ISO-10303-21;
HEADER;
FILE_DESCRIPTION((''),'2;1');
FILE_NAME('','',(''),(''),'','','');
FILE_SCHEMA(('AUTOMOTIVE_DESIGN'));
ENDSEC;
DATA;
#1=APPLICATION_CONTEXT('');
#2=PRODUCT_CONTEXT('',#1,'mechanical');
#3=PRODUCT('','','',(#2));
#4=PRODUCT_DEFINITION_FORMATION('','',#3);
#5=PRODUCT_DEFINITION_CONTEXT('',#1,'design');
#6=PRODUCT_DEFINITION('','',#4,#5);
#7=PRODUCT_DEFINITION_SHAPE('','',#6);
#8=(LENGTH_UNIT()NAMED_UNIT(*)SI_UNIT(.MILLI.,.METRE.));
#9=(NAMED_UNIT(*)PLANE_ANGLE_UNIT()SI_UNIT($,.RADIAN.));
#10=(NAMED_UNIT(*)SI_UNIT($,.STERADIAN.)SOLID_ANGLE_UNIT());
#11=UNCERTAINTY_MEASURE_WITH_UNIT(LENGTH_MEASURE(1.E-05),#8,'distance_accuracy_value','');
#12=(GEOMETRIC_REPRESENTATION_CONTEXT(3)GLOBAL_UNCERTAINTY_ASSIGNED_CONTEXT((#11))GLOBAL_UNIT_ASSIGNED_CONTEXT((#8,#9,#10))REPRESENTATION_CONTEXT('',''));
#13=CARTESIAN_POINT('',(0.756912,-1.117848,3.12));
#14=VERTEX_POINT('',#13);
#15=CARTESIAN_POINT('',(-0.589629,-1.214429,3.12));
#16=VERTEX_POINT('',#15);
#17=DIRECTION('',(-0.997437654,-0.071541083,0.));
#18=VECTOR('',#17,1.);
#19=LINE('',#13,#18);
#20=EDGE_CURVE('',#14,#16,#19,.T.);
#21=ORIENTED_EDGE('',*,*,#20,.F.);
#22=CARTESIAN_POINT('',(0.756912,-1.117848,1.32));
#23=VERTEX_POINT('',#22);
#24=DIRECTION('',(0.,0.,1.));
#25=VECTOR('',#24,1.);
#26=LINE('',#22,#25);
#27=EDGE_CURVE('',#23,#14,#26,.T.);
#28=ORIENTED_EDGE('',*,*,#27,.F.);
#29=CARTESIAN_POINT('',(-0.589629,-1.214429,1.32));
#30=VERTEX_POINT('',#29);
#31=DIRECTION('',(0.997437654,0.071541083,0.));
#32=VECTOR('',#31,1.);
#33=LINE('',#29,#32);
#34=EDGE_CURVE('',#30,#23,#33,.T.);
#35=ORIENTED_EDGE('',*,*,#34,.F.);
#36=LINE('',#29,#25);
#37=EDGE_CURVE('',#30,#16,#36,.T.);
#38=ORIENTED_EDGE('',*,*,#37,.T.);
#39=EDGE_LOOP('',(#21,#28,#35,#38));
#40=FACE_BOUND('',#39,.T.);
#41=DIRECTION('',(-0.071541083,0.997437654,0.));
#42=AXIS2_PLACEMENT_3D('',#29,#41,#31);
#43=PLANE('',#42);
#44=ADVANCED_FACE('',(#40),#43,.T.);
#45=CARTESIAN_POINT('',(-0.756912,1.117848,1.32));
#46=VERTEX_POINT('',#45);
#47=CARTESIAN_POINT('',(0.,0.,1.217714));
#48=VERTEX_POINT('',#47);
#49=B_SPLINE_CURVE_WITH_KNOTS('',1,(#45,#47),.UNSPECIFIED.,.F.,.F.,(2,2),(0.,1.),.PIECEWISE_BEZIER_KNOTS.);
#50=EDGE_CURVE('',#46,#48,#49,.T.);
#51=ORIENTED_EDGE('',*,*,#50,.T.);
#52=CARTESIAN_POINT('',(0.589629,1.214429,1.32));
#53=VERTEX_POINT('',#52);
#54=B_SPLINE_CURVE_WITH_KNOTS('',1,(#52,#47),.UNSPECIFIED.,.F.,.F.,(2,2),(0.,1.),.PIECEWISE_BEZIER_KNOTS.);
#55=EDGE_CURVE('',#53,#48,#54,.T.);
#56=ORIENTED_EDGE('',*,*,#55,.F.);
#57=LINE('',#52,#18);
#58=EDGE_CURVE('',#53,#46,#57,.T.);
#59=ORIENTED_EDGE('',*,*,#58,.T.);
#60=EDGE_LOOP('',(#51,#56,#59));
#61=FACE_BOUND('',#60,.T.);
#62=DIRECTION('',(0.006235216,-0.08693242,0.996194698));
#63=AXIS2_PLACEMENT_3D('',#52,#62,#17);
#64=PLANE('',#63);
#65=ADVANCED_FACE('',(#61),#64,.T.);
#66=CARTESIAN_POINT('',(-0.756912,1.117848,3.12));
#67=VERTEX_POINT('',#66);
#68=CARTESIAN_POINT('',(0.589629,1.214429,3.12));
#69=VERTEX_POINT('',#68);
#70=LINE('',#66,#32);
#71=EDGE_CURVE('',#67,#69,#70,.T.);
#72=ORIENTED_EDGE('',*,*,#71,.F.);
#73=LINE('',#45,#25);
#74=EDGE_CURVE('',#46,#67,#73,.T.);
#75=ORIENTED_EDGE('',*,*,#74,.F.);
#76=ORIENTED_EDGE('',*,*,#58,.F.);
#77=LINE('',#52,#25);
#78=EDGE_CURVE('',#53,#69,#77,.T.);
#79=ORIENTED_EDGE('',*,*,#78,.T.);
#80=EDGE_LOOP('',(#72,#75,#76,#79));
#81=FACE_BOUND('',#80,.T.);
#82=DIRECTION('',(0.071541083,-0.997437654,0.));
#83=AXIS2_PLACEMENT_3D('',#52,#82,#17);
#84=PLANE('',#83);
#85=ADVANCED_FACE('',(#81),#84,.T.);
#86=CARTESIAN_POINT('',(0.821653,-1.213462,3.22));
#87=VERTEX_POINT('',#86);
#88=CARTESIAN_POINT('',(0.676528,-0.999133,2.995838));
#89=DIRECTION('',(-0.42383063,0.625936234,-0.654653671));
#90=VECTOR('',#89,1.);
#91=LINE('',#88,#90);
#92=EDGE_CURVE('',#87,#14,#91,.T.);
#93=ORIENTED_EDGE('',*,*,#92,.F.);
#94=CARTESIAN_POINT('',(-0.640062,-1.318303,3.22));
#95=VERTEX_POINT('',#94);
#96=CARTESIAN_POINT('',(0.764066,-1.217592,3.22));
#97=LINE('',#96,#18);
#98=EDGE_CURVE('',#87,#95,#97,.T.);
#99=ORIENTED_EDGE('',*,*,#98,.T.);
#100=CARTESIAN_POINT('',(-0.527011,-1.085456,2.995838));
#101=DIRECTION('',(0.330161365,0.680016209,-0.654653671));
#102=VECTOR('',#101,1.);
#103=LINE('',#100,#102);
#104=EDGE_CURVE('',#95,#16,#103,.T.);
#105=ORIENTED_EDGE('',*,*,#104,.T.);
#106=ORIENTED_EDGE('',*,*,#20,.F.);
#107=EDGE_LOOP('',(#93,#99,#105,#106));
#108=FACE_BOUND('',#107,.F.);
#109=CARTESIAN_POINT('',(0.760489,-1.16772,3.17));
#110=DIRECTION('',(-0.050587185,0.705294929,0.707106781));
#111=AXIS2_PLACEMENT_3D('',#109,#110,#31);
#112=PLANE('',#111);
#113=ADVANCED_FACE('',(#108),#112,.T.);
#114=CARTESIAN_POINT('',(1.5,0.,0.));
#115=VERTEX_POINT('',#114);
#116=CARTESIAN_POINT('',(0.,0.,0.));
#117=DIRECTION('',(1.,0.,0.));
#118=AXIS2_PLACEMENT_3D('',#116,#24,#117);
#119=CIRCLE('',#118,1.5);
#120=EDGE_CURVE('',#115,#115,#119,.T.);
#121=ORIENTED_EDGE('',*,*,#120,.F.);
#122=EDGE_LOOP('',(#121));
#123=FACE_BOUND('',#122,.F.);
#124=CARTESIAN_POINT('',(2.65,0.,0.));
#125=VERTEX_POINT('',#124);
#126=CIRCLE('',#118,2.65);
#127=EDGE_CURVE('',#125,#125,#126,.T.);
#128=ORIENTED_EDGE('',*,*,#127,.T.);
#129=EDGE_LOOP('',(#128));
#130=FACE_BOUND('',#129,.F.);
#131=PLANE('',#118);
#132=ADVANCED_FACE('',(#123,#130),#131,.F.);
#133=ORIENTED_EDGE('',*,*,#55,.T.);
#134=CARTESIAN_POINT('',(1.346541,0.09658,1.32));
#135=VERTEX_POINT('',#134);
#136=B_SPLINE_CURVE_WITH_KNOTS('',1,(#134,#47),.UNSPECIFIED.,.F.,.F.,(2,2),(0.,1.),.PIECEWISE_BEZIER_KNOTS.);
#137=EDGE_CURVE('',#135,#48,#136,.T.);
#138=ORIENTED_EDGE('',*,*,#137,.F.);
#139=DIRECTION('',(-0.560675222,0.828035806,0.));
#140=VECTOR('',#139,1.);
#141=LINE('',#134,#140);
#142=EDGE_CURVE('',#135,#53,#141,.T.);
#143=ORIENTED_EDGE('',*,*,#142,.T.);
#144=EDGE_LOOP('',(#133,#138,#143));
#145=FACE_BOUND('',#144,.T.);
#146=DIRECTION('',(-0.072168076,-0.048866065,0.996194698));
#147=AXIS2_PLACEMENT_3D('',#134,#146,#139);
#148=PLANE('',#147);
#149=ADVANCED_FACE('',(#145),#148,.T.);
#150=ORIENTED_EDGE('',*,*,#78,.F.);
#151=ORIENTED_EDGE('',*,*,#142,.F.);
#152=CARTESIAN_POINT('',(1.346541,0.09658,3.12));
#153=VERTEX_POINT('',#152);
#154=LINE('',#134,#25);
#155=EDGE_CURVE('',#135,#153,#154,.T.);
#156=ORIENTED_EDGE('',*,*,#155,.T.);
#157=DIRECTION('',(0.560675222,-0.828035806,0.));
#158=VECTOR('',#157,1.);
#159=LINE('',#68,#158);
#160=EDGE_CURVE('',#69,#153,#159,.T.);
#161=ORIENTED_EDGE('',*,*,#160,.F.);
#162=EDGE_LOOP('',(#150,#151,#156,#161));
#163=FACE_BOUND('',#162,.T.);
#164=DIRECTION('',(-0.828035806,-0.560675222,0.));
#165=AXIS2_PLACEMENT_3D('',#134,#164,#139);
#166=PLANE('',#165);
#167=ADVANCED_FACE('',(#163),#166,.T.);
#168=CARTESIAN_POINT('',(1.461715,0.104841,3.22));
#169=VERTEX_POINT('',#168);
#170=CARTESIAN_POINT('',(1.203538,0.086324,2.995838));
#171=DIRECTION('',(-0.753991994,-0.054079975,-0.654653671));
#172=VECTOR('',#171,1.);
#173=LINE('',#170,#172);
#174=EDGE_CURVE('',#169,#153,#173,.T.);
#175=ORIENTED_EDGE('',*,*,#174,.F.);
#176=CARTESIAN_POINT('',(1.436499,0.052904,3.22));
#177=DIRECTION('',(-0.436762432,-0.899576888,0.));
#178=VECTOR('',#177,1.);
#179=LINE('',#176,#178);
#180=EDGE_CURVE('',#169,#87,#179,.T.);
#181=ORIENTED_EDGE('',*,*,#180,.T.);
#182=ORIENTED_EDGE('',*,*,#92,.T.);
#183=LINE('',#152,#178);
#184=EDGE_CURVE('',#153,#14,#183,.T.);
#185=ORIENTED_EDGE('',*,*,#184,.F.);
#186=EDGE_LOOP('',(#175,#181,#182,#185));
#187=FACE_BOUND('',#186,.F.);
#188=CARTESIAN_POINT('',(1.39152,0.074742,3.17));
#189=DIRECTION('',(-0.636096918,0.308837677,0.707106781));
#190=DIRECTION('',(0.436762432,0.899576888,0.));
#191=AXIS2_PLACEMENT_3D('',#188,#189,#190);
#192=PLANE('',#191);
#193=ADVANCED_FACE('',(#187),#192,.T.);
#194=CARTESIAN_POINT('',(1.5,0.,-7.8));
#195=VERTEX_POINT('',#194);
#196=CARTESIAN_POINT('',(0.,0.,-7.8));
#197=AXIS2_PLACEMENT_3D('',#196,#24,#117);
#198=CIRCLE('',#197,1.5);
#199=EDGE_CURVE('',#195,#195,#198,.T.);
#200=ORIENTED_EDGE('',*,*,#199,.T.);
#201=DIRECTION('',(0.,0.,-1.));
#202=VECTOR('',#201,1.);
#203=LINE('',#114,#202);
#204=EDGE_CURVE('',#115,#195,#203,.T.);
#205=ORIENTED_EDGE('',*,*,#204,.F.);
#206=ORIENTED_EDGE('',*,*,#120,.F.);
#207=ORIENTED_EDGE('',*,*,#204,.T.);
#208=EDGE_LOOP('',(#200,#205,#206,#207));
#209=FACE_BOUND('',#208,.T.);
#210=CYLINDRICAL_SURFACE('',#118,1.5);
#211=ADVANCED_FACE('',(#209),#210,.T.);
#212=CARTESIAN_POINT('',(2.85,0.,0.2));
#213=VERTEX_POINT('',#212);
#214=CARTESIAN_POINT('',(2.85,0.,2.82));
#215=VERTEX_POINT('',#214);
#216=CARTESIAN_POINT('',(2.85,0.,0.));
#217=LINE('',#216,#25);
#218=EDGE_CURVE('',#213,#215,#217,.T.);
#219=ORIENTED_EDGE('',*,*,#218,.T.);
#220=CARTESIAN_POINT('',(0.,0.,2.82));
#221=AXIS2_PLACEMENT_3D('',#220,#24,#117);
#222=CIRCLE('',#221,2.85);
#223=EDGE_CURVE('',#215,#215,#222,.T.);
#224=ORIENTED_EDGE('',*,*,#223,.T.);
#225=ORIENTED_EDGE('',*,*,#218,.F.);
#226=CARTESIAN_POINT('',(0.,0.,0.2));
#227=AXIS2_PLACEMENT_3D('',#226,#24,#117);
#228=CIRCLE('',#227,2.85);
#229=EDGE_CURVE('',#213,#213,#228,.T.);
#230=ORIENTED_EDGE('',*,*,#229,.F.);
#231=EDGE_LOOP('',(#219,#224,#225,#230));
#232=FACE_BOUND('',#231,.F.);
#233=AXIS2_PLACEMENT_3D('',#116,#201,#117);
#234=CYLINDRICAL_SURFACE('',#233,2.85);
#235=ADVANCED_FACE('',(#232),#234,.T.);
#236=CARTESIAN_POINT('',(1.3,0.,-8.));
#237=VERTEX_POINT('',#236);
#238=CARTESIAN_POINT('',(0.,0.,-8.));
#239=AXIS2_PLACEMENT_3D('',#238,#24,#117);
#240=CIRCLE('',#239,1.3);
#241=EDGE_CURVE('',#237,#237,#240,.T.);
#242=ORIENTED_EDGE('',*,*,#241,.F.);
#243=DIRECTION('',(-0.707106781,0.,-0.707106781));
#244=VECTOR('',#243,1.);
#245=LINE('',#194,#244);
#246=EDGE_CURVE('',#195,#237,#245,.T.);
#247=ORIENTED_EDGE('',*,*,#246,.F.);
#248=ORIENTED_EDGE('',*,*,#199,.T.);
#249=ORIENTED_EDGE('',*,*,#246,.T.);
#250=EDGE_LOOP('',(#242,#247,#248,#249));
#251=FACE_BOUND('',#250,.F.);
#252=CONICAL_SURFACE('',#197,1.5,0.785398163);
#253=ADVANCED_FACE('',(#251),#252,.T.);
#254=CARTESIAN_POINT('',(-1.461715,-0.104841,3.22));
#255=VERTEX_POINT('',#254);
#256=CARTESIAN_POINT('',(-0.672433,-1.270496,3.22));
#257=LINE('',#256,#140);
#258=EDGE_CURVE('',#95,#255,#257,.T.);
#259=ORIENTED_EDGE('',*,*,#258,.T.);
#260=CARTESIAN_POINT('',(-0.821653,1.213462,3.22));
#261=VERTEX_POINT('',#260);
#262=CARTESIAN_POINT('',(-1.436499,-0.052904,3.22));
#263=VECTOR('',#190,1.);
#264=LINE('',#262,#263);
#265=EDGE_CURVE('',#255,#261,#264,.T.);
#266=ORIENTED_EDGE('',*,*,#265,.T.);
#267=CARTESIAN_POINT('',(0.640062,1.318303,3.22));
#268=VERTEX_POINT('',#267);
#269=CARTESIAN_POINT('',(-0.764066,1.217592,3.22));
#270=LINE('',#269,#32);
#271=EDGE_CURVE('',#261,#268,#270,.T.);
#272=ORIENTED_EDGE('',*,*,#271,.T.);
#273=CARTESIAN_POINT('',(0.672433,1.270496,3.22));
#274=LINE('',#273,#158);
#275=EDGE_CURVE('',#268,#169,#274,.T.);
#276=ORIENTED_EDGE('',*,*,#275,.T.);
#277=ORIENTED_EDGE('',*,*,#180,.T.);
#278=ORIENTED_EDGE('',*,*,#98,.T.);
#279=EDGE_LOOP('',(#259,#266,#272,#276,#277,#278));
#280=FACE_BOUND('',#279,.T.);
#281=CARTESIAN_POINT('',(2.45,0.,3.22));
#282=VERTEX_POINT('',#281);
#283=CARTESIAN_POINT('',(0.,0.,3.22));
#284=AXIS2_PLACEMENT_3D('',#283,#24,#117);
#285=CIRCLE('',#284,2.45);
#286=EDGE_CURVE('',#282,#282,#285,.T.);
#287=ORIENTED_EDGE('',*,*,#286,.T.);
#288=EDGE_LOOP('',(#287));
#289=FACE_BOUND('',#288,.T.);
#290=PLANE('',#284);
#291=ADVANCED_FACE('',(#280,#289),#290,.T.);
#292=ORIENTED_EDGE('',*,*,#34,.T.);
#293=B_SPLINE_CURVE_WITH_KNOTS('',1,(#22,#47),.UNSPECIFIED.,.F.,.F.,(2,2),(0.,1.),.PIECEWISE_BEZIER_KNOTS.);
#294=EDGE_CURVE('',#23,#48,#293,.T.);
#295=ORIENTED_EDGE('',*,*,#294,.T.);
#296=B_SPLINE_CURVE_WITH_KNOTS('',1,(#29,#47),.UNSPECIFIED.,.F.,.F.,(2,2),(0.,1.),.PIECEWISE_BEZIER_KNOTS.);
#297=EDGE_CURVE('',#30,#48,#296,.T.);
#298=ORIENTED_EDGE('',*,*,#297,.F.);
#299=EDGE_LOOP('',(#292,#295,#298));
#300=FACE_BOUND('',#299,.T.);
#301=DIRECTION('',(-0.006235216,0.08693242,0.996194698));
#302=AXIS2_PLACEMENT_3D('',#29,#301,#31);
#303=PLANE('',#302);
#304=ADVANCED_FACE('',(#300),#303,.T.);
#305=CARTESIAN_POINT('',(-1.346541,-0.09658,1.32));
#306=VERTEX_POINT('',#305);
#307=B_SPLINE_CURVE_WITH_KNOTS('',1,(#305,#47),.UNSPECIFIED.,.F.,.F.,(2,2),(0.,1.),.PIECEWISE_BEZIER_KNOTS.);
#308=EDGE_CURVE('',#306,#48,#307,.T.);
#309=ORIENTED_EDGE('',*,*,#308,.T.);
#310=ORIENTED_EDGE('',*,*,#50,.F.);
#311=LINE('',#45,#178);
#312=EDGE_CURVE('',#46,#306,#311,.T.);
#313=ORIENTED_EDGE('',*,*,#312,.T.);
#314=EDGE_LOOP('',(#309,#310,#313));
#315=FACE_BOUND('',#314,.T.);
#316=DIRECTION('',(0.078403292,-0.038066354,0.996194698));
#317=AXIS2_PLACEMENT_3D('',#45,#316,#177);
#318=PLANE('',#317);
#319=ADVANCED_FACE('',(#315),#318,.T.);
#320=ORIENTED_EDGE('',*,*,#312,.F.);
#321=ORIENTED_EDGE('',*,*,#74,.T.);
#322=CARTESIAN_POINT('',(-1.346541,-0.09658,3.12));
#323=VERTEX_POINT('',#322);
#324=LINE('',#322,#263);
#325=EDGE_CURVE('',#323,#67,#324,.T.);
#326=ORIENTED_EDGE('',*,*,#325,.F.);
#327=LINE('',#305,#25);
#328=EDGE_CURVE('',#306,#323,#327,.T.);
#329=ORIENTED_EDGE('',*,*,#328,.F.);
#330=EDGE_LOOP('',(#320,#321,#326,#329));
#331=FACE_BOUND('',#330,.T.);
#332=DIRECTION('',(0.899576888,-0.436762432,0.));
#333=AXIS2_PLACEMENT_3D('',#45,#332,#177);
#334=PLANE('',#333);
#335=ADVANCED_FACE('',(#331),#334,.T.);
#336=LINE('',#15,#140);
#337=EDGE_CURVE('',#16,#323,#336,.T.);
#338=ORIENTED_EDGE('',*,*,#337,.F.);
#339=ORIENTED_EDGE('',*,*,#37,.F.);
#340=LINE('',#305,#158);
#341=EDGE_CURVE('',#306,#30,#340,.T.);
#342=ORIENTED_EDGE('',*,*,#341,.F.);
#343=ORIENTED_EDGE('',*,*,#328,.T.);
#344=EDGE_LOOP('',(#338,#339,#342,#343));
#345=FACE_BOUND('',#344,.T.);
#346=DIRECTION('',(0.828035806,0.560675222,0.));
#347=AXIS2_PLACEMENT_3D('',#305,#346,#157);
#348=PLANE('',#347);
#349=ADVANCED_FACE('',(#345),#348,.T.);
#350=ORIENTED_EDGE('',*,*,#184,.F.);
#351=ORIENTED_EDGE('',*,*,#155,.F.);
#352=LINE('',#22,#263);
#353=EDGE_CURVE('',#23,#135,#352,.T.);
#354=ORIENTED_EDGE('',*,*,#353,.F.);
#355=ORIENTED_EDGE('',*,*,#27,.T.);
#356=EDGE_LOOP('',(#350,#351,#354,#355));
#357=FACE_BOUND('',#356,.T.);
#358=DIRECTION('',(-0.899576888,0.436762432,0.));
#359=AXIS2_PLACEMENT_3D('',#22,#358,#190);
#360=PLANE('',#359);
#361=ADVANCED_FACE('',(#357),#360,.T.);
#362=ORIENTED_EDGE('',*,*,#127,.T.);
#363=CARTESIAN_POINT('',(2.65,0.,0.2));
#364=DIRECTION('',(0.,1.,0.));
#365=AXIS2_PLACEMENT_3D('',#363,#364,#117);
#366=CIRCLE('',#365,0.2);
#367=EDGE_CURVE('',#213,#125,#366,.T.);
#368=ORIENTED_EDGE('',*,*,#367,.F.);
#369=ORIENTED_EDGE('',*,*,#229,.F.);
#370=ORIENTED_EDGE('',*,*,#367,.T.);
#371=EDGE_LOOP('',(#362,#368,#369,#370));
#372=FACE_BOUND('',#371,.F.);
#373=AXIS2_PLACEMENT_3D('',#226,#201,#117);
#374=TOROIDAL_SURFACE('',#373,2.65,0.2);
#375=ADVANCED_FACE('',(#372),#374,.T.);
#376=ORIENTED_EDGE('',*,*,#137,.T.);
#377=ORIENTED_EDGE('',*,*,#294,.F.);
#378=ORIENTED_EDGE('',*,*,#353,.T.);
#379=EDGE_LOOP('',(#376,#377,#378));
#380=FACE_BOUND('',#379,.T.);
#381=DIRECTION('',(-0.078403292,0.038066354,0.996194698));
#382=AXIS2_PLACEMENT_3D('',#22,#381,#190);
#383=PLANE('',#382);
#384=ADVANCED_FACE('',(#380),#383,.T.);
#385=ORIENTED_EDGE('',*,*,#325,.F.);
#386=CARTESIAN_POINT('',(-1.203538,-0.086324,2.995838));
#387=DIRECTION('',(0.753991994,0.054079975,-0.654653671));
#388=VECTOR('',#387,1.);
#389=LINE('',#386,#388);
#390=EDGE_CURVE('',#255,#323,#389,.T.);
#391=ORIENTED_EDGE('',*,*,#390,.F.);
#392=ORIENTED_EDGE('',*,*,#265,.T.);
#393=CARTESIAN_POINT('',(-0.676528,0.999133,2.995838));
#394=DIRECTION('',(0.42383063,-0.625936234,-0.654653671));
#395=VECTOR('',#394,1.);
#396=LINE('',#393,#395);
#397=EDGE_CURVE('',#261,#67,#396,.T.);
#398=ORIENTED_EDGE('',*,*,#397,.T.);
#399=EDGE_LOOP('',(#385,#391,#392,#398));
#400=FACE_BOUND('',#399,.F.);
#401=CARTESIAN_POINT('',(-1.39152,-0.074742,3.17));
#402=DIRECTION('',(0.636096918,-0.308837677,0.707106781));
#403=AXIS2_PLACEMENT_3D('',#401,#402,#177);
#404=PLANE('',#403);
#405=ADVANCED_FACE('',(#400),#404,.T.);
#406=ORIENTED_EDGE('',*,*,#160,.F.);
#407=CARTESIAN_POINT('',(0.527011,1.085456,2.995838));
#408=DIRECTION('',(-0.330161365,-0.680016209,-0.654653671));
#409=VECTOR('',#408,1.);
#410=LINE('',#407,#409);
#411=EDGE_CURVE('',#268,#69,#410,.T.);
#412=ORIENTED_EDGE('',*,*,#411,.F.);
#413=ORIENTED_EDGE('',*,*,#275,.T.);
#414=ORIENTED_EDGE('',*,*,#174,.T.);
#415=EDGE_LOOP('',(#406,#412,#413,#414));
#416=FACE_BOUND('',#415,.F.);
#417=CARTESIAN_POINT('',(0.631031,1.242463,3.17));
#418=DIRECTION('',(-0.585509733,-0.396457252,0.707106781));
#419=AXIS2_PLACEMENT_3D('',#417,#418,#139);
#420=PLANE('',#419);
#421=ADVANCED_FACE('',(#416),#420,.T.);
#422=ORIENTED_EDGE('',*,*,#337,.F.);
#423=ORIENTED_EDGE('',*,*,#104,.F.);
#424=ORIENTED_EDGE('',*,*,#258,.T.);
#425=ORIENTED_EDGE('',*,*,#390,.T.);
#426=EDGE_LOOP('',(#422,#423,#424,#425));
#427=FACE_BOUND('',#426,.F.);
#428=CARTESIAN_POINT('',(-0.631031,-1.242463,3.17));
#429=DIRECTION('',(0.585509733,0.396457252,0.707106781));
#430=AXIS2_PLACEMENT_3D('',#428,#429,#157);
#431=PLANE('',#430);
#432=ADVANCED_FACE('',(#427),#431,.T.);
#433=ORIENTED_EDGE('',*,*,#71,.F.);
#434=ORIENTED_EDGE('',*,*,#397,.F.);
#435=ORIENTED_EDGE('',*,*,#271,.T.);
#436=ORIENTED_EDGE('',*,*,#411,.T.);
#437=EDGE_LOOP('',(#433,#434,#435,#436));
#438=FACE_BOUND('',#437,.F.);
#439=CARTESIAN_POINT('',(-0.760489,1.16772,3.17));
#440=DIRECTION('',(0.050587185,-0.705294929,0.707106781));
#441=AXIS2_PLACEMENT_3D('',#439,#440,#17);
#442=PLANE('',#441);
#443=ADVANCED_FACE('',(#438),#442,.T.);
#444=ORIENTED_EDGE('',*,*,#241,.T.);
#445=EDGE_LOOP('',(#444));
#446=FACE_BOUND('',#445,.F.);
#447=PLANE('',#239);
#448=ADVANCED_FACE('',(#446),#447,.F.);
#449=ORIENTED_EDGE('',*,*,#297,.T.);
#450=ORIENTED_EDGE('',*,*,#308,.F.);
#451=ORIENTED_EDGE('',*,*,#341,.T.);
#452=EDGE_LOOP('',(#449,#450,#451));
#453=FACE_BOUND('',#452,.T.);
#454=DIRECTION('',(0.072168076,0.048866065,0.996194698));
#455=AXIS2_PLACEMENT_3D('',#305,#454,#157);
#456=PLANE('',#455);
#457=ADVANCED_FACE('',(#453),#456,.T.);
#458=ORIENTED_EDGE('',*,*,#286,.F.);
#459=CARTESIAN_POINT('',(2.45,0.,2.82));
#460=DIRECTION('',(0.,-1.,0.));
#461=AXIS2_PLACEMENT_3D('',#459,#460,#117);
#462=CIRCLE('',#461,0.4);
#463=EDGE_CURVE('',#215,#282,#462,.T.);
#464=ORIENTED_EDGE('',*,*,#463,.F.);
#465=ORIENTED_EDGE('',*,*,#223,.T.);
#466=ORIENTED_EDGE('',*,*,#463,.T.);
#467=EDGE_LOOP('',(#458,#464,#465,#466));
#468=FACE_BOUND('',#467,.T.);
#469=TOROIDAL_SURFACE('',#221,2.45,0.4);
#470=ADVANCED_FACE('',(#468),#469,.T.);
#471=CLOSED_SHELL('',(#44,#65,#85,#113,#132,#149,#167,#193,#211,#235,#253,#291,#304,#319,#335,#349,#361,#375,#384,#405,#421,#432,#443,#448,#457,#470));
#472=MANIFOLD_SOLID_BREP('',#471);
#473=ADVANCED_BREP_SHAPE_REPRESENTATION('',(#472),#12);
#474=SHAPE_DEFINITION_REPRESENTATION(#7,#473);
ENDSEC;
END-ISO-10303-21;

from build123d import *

# Parameters (mm, degrees)
F0_R     = 2.85
F0_R_2   = 1.5
F1_DEPTH = 3.22
F2_DEPTH = 8
F3_R     = 0.4
F4_R     = 0.2
F5_SIZE  = 0.2
F6_START = 1.32
F6_DEPTH = 23.68
F7_SIZE  = 0.1


# Not quite as in the source:
# - an extrude whose draft closes it to a point is written as a loft to that point


with BuildPart() as f1:
    # F0 (on Top) → F1 (new body)
    with BuildSketch(Plane.XY):
        Circle(F0_R)
        Circle(F0_R_2, mode=Mode.SUBTRACT)
        Circle(F0_R_2)
        Polygon((-1.3465408328, -0.0965804618), (-0.7569115498, 1.1178483376), (0.589629283, 1.2144287993), (1.3465408328, 0.0965804618), (0.7569115498, -1.1178483376), (-0.589629283, -1.2144287993), align=None, mode=Mode.SUBTRACT)
        Polygon((0.589629283, 1.2144287993), (-0.7569115498, 1.1178483376), (-1.3465408328, -0.0965804618), (-0.589629283, -1.2144287993), (0.7569115498, -1.1178483376), (1.3465408328, 0.0965804618), align=None)
    extrude(amount=F1_DEPTH)

    # F0 (on Top) → F2 (join)
    with BuildSketch(Plane.XY):
        Circle(F0_R_2)
        Polygon((-1.3465408328, -0.0965804618), (-0.7569115498, 1.1178483376), (0.589629283, 1.2144287993), (1.3465408328, 0.0965804618), (0.7569115498, -1.1178483376), (-0.589629283, -1.2144287993), align=None, mode=Mode.SUBTRACT)
        Polygon((0.589629283, 1.2144287993), (-0.7569115498, 1.1178483376), (-1.3465408328, -0.0965804618), (-0.589629283, -1.2144287993), (0.7569115498, -1.1178483376), (1.3465408328, 0.0965804618), align=None)
    extrude(amount=-F2_DEPTH)

    # F3
    f3_edges = [f1.edges().sort_by_distance(p)[0] for p in [
        (-2.85, 0, 3.22),
    ]]
    fillet(f3_edges, radius=F3_R)

    # F4
    f4_edges = [f1.edges().sort_by_distance(p)[0] for p in [
        (-2.85, 0, 0),
    ]]
    fillet(f4_edges, radius=F4_R)

    # F5
    f5_edges = [f1.edges().sort_by_distance(p)[0] for p in [
        (-1.5, 0, -8),
    ]]
    chamfer(f5_edges, length=F5_SIZE)

    # F0 (on Top) → F6 (cut)
    with BuildSketch(Plane.XY.offset(F6_START)):
        Polygon((0.589629283, 1.2144287993), (-0.7569115498, 1.1178483376), (-1.3465408328, -0.0965804618), (-0.589629283, -1.2144287993), (0.7569115498, -1.1178483376), (1.3465408328, 0.0965804618), align=None)
    extrude(amount=F6_DEPTH, mode=Mode.SUBTRACT)

    # F7
    f7_edges = [f1.edges().sort_by_distance(p)[0] for p in [
        (-1.051726, 0.510634, 3.22),
        (-0.083641, 1.166139, 3.22),
        (0.968085, 0.655505, 3.22),
        (1.051726, -0.510634, 3.22),
        (0.083641, -1.166139, 3.22),
        (-0.968085, -0.655505, 3.22),
    ]]
    chamfer(f7_edges, length=F7_SIZE)

    # F6_face (on face) → F8 section 0
    with BuildSketch(Plane.XY.offset(1.32), mode=Mode.PRIVATE) as f8_s0:
        Polygon((1.3465408328, 0.0965804618), (0.589629283, 1.2144287993), (-0.7569115498, 1.1178483376), (-1.3465408328, -0.0965804618), (-0.589629283, -1.2144287993), (0.7569115498, -1.1178483376), align=None)
    loft([f8_s0.sketch, Vertex(0, 0, 1.217714003)], ruled=True, mode=Mode.SUBTRACT)


solid = f1.part
